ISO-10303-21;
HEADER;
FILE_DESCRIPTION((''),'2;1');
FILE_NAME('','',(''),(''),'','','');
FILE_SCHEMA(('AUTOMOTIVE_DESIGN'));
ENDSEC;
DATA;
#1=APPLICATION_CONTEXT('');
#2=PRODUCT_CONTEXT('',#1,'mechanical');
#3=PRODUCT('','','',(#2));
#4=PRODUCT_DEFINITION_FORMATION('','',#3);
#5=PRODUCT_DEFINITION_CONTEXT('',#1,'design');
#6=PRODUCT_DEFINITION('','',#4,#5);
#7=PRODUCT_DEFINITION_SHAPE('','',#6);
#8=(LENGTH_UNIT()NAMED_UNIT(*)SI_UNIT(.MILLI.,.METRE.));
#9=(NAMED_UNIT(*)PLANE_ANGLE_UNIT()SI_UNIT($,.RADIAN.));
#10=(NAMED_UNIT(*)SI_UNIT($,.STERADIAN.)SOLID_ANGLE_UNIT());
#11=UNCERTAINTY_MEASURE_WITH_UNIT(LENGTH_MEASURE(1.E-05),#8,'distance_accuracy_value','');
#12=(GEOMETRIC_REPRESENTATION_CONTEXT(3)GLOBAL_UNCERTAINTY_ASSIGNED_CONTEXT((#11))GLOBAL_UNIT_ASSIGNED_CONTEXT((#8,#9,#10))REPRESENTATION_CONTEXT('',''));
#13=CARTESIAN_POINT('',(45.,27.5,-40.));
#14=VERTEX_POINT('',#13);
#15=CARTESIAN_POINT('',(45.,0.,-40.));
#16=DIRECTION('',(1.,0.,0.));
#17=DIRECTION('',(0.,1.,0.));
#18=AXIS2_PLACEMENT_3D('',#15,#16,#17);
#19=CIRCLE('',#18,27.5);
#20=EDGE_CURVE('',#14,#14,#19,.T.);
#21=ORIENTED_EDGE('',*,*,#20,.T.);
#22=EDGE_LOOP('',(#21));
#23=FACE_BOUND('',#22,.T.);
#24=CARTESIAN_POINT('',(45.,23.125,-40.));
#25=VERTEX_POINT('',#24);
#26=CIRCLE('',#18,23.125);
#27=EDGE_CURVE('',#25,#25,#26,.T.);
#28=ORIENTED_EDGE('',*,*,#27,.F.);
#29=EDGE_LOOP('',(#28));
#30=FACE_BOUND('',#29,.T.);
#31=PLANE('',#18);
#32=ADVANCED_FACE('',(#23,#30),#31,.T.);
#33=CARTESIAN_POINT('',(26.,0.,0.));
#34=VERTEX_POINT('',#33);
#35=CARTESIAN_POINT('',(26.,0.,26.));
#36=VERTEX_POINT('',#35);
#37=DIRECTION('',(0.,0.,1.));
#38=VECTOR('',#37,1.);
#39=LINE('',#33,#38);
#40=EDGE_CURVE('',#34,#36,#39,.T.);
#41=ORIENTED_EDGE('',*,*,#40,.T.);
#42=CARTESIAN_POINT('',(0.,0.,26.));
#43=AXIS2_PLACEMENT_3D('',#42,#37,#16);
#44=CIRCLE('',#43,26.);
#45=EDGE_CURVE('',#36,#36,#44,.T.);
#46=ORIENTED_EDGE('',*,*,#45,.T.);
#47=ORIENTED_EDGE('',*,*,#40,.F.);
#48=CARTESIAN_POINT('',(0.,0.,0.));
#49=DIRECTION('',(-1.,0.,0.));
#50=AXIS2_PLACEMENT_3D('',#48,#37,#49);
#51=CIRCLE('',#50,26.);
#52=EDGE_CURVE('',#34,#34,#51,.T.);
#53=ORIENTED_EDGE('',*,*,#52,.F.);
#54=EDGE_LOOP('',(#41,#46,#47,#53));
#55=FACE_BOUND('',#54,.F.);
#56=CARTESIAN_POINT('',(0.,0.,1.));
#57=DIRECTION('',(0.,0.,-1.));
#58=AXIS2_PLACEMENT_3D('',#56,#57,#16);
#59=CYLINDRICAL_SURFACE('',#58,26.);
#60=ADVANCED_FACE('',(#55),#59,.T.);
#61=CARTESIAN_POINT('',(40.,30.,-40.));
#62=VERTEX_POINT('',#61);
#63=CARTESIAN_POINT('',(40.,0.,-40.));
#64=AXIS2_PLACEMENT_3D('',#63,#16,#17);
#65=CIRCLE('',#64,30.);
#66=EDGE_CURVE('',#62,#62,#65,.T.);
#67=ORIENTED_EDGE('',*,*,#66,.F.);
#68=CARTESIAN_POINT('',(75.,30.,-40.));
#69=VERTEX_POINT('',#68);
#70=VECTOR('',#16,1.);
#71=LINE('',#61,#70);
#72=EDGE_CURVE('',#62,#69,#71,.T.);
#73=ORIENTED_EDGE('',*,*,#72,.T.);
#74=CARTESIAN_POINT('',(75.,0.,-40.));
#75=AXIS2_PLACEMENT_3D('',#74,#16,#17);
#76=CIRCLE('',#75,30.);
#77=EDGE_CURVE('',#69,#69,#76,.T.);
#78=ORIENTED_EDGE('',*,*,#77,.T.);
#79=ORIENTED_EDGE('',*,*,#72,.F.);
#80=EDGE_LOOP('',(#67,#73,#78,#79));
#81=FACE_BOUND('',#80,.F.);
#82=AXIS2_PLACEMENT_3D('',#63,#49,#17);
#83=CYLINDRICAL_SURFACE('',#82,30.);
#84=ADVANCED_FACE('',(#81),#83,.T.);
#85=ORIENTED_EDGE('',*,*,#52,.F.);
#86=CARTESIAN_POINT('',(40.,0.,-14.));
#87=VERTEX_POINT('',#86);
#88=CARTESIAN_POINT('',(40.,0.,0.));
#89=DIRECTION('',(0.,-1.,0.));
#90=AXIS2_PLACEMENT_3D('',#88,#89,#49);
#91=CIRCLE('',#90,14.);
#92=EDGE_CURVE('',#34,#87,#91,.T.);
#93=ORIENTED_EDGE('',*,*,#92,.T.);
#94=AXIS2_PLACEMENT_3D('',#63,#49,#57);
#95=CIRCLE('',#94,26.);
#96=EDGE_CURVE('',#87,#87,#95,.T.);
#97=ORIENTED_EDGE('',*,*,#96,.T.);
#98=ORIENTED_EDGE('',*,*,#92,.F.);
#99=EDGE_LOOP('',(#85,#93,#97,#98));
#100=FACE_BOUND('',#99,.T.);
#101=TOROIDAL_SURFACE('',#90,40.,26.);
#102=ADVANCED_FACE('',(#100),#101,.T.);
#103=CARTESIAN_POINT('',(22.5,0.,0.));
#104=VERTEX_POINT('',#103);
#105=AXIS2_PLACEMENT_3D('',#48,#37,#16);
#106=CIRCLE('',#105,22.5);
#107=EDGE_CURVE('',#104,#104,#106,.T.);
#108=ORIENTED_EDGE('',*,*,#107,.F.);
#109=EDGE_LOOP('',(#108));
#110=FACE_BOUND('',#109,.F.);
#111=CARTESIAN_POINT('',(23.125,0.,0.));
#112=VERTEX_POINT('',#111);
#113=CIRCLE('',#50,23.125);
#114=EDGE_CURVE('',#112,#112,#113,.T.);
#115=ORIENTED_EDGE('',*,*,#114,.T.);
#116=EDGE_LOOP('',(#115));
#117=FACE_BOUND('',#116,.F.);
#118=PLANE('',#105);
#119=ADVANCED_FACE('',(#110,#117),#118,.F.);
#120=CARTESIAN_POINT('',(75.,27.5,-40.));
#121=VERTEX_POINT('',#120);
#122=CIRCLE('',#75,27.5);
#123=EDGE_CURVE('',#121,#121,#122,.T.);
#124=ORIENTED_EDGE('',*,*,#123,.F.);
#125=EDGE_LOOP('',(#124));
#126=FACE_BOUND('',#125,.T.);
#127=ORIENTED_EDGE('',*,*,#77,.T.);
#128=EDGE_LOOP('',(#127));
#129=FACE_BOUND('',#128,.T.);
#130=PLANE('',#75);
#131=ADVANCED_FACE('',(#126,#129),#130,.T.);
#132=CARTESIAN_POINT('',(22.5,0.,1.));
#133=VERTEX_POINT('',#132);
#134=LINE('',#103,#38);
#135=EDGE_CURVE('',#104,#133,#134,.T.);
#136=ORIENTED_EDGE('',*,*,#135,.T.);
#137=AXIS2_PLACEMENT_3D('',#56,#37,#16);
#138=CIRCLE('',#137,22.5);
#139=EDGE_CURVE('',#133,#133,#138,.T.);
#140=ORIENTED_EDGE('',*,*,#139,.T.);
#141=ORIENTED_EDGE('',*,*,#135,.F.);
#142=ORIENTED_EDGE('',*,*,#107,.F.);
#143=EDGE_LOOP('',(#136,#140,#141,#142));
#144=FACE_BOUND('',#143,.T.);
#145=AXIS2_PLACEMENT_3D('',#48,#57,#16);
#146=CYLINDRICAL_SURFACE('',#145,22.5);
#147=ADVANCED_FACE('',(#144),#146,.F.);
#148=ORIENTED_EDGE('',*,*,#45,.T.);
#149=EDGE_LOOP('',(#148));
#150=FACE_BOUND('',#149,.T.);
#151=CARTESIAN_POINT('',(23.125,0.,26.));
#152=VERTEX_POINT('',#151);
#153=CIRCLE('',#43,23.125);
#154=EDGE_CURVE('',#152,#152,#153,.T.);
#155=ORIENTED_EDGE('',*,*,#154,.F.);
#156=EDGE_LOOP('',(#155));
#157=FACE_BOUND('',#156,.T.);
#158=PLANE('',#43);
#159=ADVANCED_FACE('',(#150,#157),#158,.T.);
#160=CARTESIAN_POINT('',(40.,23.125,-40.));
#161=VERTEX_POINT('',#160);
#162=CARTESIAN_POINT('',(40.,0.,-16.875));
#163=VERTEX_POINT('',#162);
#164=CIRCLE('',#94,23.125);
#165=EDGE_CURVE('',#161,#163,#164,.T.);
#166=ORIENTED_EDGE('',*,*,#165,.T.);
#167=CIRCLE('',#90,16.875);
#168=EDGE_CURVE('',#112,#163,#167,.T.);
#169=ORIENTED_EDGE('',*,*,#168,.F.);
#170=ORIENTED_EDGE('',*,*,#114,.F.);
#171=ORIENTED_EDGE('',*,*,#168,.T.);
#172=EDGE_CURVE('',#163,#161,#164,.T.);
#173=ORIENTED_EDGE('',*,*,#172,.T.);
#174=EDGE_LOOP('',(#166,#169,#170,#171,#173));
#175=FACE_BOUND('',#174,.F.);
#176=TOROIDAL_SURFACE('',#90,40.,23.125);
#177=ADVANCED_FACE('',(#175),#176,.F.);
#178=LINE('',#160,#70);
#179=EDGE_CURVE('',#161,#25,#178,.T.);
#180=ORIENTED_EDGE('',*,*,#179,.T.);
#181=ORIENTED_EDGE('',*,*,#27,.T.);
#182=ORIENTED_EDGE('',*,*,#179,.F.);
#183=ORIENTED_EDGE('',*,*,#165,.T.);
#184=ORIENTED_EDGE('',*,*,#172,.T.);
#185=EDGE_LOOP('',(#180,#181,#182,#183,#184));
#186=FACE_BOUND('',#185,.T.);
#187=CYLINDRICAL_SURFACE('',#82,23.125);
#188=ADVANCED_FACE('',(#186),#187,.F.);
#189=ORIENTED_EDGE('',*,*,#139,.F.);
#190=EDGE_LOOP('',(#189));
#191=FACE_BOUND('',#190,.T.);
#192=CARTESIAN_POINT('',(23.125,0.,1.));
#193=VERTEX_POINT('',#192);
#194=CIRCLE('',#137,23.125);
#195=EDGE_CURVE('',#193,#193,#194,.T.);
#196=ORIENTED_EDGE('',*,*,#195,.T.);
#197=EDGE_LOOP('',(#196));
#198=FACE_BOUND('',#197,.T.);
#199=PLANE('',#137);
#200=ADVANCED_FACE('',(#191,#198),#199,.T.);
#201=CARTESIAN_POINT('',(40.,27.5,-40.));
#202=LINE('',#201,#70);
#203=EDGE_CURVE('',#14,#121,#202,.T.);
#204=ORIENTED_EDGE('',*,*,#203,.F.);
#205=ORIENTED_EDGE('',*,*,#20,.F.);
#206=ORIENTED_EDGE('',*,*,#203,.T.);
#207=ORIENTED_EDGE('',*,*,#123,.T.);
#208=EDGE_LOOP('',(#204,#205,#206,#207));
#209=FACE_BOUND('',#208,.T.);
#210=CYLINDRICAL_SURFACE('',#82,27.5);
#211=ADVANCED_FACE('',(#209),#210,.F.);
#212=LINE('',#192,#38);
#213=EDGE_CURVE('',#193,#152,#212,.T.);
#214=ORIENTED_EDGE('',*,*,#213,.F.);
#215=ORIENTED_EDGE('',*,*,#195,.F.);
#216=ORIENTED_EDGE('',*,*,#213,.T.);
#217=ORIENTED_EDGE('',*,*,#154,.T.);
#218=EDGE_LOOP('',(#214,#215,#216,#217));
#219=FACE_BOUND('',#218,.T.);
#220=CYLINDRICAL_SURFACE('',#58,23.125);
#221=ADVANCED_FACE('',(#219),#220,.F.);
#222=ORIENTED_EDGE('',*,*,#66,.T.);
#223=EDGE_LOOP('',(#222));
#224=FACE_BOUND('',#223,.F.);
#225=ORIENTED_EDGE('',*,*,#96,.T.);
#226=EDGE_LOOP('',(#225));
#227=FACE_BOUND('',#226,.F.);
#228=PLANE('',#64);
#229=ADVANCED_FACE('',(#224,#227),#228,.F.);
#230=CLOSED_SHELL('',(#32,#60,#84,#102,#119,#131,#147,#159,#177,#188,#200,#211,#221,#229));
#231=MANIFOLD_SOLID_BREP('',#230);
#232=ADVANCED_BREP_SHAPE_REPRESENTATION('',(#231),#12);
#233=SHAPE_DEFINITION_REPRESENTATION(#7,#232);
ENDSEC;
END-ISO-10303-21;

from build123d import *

# Parameters (mm, degrees)
F0_R     = 26
F0_R_2   = 23.125
F3_R     = 26
F3_R_2   = 23.125
F3_R_3   = 22.5
F4_DEPTH = 1
F5_R     = 26
F5_R_2   = 23.125
F6_DEPTH = 25
F7_R     = 27.5
F7_R_2   = 26
F7_R_3   = 23.125
F8_DEPTH = 5
F7_R_4   = 30
F9_DEPTH = 35


with BuildPart() as f2:
    # F2: sweep along a path in F1
    with BuildLine(Plane.XZ) as f2_path:
        ThreePointArc((0, 0), (11.7157287525, -28.2842712475), (40, -40))
    # F0 (on Top) → F2 (sweep)
    with BuildSketch(Plane.XY):
        Circle(F0_R)
        Circle(F0_R_2, mode=Mode.SUBTRACT)
    sweep(path=f2_path.line)

    # F3 (on face) → F4 (join)
    with BuildSketch(Plane.XY):
        Circle(F3_R)
        Circle(F3_R_2, mode=Mode.SUBTRACT)
        Circle(F3_R_2)
        Circle(F3_R_3, mode=Mode.SUBTRACT)
    extrude(amount=F4_DEPTH)

    # F5 (on face) → F6 (join)
    with BuildSketch(Plane.XY.offset(1)):
        Circle(F5_R)
        Circle(F5_R_2, mode=Mode.SUBTRACT)
    extrude(amount=F6_DEPTH)

    # F7 (on face) → F8 (join)
    with BuildSketch(Plane.YZ.offset(40)):
        with Locations((0, -40)):
            Circle(F7_R)
        with Locations((0, -40)):
            Circle(F7_R_2, mode=Mode.SUBTRACT)
        with Locations((0, -40)):
            Circle(F7_R_2)
        with Locations((0, -40)):
            Circle(F7_R_3, mode=Mode.SUBTRACT)
    extrude(amount=F8_DEPTH)

    # F7 (on face) → F9 (join)
    with BuildSketch(Plane.YZ.offset(40)):
        with Locations((0, -40)):
            Circle(F7_R_4)
        with Locations((0, -40)):
            Circle(F7_R, mode=Mode.SUBTRACT)
    extrude(amount=F9_DEPTH)


solid = f2.part
